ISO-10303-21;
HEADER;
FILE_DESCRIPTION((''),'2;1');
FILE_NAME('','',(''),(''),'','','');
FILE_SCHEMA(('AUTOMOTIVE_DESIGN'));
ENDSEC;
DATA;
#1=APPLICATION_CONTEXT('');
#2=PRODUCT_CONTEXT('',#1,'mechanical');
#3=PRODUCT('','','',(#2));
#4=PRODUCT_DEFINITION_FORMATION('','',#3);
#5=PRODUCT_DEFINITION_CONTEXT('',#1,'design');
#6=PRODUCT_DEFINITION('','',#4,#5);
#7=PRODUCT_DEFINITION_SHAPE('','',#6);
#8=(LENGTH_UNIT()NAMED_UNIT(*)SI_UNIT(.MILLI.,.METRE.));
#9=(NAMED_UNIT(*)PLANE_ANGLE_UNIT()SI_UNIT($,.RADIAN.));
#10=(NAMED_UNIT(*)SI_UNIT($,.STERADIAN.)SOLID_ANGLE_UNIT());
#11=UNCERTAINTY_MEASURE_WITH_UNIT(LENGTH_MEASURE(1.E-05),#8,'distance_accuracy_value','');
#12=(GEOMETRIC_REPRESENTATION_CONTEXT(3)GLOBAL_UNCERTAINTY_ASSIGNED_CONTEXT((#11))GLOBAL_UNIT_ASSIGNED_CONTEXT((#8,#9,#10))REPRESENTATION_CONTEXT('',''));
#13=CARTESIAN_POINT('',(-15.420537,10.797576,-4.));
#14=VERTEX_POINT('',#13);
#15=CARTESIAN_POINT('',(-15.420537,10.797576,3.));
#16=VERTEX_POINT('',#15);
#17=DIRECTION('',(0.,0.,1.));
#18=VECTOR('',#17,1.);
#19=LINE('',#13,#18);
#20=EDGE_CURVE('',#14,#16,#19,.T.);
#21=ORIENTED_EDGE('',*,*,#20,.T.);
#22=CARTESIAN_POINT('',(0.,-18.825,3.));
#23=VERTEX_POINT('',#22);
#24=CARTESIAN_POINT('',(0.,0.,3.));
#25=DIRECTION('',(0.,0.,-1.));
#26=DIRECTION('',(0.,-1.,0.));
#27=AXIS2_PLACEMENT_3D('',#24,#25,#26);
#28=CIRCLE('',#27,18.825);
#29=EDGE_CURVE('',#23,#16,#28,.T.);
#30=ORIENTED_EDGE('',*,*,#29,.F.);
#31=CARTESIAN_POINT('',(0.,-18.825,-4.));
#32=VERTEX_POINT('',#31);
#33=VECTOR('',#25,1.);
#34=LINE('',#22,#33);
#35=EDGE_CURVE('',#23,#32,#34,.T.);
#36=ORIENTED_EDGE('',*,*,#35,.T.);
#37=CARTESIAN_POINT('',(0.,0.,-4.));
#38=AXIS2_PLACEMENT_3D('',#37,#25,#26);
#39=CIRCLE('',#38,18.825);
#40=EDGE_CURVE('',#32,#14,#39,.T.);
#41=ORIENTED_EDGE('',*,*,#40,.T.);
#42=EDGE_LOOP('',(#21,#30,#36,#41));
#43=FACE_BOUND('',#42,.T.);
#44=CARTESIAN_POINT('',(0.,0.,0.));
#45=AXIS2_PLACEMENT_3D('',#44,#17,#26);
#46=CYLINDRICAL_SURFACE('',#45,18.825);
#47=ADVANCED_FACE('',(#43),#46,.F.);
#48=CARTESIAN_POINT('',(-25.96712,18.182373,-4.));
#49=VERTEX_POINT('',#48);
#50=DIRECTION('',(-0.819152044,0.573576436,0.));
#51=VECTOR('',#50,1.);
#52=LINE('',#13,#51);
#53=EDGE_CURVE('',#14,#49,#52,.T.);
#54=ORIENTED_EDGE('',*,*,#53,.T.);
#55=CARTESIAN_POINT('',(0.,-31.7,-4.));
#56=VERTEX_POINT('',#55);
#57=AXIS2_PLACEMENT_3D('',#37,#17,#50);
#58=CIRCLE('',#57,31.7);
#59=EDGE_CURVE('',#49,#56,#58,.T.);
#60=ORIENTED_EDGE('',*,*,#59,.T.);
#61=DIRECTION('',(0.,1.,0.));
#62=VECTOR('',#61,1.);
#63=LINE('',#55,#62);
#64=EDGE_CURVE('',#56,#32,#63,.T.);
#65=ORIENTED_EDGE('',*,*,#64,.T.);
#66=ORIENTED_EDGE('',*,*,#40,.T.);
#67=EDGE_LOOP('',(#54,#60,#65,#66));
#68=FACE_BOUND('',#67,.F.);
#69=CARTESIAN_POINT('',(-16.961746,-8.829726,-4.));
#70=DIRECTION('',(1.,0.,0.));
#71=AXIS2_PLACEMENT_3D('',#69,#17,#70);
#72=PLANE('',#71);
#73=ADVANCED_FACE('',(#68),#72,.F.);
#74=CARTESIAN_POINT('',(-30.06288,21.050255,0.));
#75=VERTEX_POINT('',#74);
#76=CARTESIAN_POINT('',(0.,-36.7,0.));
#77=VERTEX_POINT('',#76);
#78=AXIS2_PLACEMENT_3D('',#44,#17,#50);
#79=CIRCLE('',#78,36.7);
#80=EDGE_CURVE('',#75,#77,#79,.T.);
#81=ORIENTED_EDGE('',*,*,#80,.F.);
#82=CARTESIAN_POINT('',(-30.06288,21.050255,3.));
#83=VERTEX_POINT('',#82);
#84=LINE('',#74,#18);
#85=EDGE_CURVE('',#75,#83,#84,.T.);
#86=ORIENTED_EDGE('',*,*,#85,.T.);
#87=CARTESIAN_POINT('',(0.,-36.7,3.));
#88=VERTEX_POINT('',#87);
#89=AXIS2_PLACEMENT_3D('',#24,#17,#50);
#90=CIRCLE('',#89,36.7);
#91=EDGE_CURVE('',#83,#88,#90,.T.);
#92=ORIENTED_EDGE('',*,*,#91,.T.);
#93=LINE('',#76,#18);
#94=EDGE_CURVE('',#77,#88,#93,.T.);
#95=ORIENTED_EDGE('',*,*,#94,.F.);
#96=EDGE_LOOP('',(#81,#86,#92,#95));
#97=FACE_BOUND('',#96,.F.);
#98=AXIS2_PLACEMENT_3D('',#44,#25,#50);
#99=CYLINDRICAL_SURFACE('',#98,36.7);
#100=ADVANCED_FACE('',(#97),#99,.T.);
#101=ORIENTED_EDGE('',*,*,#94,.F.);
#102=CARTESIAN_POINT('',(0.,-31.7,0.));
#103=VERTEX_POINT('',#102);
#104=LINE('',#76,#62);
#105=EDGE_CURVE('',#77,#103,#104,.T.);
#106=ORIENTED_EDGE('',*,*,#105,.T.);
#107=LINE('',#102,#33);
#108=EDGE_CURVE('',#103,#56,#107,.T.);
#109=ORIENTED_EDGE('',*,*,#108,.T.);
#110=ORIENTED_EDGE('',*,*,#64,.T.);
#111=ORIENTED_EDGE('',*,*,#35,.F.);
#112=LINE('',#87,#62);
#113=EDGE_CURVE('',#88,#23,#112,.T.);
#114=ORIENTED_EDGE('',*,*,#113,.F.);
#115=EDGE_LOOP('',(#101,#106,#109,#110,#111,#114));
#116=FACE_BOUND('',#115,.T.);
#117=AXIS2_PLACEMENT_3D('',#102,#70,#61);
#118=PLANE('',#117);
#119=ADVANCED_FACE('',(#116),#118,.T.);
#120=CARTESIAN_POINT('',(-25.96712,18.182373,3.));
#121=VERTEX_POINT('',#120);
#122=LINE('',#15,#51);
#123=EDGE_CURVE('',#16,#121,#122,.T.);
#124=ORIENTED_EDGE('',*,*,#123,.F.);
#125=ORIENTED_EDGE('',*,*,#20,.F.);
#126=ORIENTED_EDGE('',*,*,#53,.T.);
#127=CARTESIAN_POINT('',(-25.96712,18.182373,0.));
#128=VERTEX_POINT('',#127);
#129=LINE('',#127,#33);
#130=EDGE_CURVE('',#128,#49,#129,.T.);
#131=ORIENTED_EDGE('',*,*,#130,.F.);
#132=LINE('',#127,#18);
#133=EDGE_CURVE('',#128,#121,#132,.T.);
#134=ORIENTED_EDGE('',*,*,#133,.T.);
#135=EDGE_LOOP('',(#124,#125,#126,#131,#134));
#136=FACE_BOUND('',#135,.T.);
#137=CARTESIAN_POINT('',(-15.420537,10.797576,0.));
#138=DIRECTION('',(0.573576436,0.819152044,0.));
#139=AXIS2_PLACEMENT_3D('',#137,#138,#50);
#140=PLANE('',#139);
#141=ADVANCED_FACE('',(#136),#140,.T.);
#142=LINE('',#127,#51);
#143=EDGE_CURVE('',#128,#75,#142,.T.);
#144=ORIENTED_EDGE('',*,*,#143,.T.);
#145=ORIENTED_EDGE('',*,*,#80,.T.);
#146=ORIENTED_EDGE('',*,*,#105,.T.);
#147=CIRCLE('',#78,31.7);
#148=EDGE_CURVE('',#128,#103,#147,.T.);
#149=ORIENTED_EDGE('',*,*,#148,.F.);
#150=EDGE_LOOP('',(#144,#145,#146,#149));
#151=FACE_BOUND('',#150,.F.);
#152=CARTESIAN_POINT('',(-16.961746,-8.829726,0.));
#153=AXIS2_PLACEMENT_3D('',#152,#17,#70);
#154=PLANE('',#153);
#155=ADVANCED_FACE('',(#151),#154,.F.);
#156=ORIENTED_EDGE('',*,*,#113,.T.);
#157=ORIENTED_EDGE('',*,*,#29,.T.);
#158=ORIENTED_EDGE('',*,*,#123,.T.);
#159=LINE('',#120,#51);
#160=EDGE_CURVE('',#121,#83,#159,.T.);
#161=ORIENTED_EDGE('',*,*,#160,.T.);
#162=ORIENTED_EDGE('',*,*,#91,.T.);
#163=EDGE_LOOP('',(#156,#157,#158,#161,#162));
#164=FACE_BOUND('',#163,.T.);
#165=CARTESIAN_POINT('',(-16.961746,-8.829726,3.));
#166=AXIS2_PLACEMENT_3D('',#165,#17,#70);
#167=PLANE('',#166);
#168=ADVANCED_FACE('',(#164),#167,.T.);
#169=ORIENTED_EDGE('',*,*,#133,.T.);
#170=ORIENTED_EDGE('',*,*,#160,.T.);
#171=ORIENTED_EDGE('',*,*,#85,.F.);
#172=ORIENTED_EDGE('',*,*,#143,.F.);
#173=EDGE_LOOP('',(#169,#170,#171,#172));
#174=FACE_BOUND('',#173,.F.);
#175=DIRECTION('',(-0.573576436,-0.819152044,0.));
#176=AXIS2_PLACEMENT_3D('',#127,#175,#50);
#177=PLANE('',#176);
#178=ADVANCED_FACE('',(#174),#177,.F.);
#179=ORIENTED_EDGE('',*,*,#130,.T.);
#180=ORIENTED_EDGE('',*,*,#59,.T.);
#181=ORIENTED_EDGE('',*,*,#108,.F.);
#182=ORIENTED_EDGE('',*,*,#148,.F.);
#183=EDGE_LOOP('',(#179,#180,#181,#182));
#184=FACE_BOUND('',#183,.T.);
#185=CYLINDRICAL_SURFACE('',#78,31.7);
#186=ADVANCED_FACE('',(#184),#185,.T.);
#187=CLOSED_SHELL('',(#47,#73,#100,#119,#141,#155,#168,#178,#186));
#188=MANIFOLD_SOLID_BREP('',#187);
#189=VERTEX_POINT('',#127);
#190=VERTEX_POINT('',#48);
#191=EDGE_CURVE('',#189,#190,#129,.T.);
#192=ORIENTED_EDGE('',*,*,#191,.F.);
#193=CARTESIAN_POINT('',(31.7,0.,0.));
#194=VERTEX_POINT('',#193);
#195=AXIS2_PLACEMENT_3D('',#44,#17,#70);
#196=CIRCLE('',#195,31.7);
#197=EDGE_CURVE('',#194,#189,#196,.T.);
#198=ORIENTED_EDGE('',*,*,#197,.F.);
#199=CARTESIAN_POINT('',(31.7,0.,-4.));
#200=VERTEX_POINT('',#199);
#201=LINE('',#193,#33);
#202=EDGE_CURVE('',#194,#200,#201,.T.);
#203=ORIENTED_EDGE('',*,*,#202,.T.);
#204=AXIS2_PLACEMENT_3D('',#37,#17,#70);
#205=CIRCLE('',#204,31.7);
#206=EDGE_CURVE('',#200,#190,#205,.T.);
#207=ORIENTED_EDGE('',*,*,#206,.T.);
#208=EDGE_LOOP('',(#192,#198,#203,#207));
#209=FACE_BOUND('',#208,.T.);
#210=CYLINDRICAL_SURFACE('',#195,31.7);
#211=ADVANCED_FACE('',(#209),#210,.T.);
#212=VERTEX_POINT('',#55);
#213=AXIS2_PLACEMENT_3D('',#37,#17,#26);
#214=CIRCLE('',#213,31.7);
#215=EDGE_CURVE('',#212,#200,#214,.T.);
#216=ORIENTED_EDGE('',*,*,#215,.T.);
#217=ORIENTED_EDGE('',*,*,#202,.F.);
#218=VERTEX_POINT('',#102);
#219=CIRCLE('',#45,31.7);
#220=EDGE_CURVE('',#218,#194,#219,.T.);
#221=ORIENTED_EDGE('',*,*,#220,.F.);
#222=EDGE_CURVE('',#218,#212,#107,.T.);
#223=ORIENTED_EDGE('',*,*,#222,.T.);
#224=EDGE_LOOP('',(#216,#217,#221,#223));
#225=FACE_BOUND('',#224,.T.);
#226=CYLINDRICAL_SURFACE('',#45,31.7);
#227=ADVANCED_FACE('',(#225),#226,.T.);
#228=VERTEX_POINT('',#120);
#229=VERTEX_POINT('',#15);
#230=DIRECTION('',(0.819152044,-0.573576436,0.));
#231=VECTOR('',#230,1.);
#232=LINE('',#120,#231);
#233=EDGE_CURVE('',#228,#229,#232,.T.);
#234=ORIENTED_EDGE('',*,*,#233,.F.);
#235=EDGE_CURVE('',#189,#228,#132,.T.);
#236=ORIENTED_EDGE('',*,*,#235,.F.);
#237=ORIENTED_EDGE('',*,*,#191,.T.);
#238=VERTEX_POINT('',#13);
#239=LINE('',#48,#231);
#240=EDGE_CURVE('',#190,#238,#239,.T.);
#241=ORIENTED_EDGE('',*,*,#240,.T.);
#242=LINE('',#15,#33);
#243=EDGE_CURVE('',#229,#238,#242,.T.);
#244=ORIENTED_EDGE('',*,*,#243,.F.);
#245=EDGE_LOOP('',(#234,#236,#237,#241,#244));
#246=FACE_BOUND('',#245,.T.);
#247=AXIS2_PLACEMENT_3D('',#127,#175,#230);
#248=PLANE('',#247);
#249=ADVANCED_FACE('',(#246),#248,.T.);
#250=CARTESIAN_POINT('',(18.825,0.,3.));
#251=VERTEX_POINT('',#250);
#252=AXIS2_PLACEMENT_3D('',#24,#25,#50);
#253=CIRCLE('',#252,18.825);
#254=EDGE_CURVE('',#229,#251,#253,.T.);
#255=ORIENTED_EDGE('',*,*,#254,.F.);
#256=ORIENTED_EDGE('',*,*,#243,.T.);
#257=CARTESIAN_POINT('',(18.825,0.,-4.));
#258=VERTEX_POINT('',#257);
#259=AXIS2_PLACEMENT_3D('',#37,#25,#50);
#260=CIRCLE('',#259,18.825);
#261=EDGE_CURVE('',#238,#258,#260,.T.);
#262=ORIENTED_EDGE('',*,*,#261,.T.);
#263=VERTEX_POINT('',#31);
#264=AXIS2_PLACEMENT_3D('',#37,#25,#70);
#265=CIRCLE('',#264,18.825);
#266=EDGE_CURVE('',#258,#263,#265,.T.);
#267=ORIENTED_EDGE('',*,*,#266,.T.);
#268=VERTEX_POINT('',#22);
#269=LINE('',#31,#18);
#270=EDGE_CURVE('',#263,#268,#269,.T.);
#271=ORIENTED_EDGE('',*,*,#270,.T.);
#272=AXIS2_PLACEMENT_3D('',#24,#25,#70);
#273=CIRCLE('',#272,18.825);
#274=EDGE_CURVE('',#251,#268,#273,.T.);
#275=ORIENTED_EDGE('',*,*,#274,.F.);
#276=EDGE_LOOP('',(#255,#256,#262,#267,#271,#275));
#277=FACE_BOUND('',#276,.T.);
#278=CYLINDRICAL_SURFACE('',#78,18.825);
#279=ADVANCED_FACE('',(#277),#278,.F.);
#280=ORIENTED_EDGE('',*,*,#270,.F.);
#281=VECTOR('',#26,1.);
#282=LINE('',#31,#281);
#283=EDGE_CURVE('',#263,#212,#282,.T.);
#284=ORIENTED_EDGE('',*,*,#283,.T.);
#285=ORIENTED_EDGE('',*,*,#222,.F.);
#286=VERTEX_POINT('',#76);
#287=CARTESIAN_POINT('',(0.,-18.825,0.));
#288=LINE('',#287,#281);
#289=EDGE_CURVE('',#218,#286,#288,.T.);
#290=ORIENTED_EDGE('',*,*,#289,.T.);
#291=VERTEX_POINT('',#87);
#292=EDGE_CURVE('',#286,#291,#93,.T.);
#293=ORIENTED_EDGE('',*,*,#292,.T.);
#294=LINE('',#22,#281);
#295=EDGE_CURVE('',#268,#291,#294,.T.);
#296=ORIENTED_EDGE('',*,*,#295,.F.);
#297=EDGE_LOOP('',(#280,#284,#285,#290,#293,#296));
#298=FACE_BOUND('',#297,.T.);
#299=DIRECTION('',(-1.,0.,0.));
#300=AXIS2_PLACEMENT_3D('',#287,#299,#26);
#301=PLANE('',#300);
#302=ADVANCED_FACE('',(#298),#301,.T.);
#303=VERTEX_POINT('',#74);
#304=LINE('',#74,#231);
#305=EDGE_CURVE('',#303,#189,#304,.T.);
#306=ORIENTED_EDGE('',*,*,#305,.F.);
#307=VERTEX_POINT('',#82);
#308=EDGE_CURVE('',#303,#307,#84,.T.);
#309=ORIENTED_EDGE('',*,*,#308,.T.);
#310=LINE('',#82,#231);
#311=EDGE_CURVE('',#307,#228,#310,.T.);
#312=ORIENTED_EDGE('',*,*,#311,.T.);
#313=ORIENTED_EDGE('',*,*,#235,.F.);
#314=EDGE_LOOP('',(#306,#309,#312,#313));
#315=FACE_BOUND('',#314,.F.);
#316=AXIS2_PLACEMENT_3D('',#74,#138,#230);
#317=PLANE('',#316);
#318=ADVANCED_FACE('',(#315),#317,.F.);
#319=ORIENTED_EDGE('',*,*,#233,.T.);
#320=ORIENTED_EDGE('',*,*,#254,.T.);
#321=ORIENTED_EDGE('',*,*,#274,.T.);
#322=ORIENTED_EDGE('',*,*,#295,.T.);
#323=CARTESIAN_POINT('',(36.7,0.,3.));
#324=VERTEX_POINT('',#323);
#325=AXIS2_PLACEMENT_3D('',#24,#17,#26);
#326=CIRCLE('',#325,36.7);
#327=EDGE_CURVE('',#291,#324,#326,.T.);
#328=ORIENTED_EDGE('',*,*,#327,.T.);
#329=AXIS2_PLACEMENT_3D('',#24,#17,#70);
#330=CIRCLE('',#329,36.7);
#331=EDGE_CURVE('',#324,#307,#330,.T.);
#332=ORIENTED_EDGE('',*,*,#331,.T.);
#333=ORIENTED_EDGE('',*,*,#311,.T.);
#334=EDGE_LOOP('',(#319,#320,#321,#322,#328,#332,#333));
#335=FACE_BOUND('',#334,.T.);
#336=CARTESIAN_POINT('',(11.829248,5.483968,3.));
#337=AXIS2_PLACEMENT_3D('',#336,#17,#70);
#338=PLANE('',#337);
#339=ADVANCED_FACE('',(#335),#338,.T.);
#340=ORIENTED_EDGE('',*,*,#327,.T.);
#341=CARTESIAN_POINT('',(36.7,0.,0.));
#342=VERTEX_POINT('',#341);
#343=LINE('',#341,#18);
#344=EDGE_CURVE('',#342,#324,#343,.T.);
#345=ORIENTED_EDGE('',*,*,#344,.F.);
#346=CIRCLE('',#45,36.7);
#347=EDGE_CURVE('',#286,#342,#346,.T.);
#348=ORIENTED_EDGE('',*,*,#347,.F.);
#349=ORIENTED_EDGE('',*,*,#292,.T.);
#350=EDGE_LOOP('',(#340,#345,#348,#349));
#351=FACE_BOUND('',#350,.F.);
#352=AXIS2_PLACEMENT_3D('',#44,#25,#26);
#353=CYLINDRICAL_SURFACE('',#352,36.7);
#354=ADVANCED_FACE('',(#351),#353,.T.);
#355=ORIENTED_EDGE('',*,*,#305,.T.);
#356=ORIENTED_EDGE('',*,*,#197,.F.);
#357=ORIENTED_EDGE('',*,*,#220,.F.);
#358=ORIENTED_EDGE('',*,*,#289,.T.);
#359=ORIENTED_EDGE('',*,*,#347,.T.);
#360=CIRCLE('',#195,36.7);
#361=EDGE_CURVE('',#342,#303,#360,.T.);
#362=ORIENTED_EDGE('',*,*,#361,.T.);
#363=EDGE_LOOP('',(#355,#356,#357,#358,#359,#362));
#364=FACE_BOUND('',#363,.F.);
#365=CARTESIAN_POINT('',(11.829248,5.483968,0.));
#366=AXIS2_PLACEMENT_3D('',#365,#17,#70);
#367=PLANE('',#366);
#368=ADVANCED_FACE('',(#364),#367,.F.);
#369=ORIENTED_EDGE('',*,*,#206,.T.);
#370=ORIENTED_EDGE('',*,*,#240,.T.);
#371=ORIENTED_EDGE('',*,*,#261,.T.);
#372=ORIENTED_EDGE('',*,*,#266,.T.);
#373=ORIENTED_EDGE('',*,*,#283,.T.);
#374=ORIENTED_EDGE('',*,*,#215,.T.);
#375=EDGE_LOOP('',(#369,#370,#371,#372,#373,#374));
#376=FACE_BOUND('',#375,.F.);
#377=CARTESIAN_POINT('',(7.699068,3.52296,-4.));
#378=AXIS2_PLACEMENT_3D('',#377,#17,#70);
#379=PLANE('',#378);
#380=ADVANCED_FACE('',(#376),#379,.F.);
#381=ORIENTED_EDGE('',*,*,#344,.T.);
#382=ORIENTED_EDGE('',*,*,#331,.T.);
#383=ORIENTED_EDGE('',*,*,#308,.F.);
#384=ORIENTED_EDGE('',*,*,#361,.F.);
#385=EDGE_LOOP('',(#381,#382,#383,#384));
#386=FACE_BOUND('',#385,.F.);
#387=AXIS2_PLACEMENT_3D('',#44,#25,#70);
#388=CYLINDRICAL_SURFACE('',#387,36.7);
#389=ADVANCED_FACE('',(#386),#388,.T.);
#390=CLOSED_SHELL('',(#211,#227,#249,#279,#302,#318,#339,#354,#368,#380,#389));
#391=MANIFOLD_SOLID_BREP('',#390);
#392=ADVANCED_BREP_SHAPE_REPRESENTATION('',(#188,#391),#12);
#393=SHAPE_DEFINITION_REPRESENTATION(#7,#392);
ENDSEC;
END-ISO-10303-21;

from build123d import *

# Parameters (mm, degrees)
F1_DEPTH = 3
F2_DEPTH = 4
F3_DEPTH = 3
F4_DEPTH = 4


with BuildPart() as f1:
    # F0 (on Top) → F1 (new body)
    with BuildSketch(Plane.XY):
        with BuildLine():
            Line((-30.0628800254, 21.0502552141), (-25.967119804, 18.1823730323))
            ThreePointArc((-25.967119804, 18.1823730323), (9.5323738443, 30.2328273387), (31.7, 0))
            ThreePointArc((31.7, 0), (22.4152849636, -22.4152849636), (0, -31.7))
            Line((0, -31.7), (0, -36.7))
            ThreePointArc((0, -36.7), (25.9508188695, -25.9508188695), (36.7, 0))
            ThreePointArc((36.7, 0), (11.0359028418, 35.0014120925), (-30.0628800254, 21.0502552141))
        make_face()
        with BuildLine():
            ThreePointArc((-15.4205372337, 10.7975764143), (5.6607866757, 17.9537215978), (18.825, 0))
            ThreePointArc((18.825, 0), (13.3112851558, -13.3112851558), (0, -18.825))
            Line((0, -18.825), (0, -31.7))
            ThreePointArc((0, -31.7), (22.4152849636, -22.4152849636), (31.7, 0))
            ThreePointArc((31.7, 0), (9.5323738443, 30.2328273387), (-25.967119804, 18.1823730323))
            Line((-25.967119804, 18.1823730323), (-15.4205372337, 10.7975764143))
        make_face()
    extrude(amount=F1_DEPTH)

    # F0 (on Top) → F2 (join)
    with BuildSketch(Plane.XY):
        with BuildLine():
            ThreePointArc((-15.4205372337, 10.7975764143), (5.6607866757, 17.9537215978), (18.825, 0))
            ThreePointArc((18.825, 0), (13.3112851558, -13.3112851558), (0, -18.825))
            Line((0, -18.825), (0, -31.7))
            ThreePointArc((0, -31.7), (22.4152849636, -22.4152849636), (31.7, 0))
            ThreePointArc((31.7, 0), (9.5323738443, 30.2328273387), (-25.967119804, 18.1823730323))
            Line((-25.967119804, 18.1823730323), (-15.4205372337, 10.7975764143))
        make_face()
    extrude(amount=-F2_DEPTH)


with BuildPart() as f3:
    # F0 (on Top) → F3 (new body)
    with BuildSketch(Plane.XY):
        with BuildLine():
            ThreePointArc((0, -18.825), (-16.6979789346, -8.6924176441), (-15.4205372337, 10.7975764143))
            Line((-15.4205372337, 10.7975764143), (-25.967119804, 18.1823730323))
            ThreePointArc((-25.967119804, 18.1823730323), (-28.1182434117, -14.6374310396), (0, -31.7))
            Line((0, -31.7), (0, -18.825))
        make_face()
        with BuildLine():
            ThreePointArc((0, -31.7), (-28.1182434117, -14.6374310396), (-25.967119804, 18.1823730323))
            Line((-25.967119804, 18.1823730323), (-30.0628800254, 21.0502552141))
            ThreePointArc((-30.0628800254, 21.0502552141), (-32.5532975776, -16.9461741057), (0, -36.7))
            Line((0, -36.7), (0, -31.7))
        make_face()
    extrude(amount=F3_DEPTH)

    # F0 (on Top) → F4 (join)
    with BuildSketch(Plane.XY):
        with BuildLine():
            ThreePointArc((0, -18.825), (-16.6979789346, -8.6924176441), (-15.4205372337, 10.7975764143))
            Line((-15.4205372337, 10.7975764143), (-25.967119804, 18.1823730323))
            ThreePointArc((-25.967119804, 18.1823730323), (-28.1182434117, -14.6374310396), (0, -31.7))
            Line((0, -31.7), (0, -18.825))
        make_face()
    extrude(amount=-F4_DEPTH)


solid = Compound([f1.part, f3.part])
